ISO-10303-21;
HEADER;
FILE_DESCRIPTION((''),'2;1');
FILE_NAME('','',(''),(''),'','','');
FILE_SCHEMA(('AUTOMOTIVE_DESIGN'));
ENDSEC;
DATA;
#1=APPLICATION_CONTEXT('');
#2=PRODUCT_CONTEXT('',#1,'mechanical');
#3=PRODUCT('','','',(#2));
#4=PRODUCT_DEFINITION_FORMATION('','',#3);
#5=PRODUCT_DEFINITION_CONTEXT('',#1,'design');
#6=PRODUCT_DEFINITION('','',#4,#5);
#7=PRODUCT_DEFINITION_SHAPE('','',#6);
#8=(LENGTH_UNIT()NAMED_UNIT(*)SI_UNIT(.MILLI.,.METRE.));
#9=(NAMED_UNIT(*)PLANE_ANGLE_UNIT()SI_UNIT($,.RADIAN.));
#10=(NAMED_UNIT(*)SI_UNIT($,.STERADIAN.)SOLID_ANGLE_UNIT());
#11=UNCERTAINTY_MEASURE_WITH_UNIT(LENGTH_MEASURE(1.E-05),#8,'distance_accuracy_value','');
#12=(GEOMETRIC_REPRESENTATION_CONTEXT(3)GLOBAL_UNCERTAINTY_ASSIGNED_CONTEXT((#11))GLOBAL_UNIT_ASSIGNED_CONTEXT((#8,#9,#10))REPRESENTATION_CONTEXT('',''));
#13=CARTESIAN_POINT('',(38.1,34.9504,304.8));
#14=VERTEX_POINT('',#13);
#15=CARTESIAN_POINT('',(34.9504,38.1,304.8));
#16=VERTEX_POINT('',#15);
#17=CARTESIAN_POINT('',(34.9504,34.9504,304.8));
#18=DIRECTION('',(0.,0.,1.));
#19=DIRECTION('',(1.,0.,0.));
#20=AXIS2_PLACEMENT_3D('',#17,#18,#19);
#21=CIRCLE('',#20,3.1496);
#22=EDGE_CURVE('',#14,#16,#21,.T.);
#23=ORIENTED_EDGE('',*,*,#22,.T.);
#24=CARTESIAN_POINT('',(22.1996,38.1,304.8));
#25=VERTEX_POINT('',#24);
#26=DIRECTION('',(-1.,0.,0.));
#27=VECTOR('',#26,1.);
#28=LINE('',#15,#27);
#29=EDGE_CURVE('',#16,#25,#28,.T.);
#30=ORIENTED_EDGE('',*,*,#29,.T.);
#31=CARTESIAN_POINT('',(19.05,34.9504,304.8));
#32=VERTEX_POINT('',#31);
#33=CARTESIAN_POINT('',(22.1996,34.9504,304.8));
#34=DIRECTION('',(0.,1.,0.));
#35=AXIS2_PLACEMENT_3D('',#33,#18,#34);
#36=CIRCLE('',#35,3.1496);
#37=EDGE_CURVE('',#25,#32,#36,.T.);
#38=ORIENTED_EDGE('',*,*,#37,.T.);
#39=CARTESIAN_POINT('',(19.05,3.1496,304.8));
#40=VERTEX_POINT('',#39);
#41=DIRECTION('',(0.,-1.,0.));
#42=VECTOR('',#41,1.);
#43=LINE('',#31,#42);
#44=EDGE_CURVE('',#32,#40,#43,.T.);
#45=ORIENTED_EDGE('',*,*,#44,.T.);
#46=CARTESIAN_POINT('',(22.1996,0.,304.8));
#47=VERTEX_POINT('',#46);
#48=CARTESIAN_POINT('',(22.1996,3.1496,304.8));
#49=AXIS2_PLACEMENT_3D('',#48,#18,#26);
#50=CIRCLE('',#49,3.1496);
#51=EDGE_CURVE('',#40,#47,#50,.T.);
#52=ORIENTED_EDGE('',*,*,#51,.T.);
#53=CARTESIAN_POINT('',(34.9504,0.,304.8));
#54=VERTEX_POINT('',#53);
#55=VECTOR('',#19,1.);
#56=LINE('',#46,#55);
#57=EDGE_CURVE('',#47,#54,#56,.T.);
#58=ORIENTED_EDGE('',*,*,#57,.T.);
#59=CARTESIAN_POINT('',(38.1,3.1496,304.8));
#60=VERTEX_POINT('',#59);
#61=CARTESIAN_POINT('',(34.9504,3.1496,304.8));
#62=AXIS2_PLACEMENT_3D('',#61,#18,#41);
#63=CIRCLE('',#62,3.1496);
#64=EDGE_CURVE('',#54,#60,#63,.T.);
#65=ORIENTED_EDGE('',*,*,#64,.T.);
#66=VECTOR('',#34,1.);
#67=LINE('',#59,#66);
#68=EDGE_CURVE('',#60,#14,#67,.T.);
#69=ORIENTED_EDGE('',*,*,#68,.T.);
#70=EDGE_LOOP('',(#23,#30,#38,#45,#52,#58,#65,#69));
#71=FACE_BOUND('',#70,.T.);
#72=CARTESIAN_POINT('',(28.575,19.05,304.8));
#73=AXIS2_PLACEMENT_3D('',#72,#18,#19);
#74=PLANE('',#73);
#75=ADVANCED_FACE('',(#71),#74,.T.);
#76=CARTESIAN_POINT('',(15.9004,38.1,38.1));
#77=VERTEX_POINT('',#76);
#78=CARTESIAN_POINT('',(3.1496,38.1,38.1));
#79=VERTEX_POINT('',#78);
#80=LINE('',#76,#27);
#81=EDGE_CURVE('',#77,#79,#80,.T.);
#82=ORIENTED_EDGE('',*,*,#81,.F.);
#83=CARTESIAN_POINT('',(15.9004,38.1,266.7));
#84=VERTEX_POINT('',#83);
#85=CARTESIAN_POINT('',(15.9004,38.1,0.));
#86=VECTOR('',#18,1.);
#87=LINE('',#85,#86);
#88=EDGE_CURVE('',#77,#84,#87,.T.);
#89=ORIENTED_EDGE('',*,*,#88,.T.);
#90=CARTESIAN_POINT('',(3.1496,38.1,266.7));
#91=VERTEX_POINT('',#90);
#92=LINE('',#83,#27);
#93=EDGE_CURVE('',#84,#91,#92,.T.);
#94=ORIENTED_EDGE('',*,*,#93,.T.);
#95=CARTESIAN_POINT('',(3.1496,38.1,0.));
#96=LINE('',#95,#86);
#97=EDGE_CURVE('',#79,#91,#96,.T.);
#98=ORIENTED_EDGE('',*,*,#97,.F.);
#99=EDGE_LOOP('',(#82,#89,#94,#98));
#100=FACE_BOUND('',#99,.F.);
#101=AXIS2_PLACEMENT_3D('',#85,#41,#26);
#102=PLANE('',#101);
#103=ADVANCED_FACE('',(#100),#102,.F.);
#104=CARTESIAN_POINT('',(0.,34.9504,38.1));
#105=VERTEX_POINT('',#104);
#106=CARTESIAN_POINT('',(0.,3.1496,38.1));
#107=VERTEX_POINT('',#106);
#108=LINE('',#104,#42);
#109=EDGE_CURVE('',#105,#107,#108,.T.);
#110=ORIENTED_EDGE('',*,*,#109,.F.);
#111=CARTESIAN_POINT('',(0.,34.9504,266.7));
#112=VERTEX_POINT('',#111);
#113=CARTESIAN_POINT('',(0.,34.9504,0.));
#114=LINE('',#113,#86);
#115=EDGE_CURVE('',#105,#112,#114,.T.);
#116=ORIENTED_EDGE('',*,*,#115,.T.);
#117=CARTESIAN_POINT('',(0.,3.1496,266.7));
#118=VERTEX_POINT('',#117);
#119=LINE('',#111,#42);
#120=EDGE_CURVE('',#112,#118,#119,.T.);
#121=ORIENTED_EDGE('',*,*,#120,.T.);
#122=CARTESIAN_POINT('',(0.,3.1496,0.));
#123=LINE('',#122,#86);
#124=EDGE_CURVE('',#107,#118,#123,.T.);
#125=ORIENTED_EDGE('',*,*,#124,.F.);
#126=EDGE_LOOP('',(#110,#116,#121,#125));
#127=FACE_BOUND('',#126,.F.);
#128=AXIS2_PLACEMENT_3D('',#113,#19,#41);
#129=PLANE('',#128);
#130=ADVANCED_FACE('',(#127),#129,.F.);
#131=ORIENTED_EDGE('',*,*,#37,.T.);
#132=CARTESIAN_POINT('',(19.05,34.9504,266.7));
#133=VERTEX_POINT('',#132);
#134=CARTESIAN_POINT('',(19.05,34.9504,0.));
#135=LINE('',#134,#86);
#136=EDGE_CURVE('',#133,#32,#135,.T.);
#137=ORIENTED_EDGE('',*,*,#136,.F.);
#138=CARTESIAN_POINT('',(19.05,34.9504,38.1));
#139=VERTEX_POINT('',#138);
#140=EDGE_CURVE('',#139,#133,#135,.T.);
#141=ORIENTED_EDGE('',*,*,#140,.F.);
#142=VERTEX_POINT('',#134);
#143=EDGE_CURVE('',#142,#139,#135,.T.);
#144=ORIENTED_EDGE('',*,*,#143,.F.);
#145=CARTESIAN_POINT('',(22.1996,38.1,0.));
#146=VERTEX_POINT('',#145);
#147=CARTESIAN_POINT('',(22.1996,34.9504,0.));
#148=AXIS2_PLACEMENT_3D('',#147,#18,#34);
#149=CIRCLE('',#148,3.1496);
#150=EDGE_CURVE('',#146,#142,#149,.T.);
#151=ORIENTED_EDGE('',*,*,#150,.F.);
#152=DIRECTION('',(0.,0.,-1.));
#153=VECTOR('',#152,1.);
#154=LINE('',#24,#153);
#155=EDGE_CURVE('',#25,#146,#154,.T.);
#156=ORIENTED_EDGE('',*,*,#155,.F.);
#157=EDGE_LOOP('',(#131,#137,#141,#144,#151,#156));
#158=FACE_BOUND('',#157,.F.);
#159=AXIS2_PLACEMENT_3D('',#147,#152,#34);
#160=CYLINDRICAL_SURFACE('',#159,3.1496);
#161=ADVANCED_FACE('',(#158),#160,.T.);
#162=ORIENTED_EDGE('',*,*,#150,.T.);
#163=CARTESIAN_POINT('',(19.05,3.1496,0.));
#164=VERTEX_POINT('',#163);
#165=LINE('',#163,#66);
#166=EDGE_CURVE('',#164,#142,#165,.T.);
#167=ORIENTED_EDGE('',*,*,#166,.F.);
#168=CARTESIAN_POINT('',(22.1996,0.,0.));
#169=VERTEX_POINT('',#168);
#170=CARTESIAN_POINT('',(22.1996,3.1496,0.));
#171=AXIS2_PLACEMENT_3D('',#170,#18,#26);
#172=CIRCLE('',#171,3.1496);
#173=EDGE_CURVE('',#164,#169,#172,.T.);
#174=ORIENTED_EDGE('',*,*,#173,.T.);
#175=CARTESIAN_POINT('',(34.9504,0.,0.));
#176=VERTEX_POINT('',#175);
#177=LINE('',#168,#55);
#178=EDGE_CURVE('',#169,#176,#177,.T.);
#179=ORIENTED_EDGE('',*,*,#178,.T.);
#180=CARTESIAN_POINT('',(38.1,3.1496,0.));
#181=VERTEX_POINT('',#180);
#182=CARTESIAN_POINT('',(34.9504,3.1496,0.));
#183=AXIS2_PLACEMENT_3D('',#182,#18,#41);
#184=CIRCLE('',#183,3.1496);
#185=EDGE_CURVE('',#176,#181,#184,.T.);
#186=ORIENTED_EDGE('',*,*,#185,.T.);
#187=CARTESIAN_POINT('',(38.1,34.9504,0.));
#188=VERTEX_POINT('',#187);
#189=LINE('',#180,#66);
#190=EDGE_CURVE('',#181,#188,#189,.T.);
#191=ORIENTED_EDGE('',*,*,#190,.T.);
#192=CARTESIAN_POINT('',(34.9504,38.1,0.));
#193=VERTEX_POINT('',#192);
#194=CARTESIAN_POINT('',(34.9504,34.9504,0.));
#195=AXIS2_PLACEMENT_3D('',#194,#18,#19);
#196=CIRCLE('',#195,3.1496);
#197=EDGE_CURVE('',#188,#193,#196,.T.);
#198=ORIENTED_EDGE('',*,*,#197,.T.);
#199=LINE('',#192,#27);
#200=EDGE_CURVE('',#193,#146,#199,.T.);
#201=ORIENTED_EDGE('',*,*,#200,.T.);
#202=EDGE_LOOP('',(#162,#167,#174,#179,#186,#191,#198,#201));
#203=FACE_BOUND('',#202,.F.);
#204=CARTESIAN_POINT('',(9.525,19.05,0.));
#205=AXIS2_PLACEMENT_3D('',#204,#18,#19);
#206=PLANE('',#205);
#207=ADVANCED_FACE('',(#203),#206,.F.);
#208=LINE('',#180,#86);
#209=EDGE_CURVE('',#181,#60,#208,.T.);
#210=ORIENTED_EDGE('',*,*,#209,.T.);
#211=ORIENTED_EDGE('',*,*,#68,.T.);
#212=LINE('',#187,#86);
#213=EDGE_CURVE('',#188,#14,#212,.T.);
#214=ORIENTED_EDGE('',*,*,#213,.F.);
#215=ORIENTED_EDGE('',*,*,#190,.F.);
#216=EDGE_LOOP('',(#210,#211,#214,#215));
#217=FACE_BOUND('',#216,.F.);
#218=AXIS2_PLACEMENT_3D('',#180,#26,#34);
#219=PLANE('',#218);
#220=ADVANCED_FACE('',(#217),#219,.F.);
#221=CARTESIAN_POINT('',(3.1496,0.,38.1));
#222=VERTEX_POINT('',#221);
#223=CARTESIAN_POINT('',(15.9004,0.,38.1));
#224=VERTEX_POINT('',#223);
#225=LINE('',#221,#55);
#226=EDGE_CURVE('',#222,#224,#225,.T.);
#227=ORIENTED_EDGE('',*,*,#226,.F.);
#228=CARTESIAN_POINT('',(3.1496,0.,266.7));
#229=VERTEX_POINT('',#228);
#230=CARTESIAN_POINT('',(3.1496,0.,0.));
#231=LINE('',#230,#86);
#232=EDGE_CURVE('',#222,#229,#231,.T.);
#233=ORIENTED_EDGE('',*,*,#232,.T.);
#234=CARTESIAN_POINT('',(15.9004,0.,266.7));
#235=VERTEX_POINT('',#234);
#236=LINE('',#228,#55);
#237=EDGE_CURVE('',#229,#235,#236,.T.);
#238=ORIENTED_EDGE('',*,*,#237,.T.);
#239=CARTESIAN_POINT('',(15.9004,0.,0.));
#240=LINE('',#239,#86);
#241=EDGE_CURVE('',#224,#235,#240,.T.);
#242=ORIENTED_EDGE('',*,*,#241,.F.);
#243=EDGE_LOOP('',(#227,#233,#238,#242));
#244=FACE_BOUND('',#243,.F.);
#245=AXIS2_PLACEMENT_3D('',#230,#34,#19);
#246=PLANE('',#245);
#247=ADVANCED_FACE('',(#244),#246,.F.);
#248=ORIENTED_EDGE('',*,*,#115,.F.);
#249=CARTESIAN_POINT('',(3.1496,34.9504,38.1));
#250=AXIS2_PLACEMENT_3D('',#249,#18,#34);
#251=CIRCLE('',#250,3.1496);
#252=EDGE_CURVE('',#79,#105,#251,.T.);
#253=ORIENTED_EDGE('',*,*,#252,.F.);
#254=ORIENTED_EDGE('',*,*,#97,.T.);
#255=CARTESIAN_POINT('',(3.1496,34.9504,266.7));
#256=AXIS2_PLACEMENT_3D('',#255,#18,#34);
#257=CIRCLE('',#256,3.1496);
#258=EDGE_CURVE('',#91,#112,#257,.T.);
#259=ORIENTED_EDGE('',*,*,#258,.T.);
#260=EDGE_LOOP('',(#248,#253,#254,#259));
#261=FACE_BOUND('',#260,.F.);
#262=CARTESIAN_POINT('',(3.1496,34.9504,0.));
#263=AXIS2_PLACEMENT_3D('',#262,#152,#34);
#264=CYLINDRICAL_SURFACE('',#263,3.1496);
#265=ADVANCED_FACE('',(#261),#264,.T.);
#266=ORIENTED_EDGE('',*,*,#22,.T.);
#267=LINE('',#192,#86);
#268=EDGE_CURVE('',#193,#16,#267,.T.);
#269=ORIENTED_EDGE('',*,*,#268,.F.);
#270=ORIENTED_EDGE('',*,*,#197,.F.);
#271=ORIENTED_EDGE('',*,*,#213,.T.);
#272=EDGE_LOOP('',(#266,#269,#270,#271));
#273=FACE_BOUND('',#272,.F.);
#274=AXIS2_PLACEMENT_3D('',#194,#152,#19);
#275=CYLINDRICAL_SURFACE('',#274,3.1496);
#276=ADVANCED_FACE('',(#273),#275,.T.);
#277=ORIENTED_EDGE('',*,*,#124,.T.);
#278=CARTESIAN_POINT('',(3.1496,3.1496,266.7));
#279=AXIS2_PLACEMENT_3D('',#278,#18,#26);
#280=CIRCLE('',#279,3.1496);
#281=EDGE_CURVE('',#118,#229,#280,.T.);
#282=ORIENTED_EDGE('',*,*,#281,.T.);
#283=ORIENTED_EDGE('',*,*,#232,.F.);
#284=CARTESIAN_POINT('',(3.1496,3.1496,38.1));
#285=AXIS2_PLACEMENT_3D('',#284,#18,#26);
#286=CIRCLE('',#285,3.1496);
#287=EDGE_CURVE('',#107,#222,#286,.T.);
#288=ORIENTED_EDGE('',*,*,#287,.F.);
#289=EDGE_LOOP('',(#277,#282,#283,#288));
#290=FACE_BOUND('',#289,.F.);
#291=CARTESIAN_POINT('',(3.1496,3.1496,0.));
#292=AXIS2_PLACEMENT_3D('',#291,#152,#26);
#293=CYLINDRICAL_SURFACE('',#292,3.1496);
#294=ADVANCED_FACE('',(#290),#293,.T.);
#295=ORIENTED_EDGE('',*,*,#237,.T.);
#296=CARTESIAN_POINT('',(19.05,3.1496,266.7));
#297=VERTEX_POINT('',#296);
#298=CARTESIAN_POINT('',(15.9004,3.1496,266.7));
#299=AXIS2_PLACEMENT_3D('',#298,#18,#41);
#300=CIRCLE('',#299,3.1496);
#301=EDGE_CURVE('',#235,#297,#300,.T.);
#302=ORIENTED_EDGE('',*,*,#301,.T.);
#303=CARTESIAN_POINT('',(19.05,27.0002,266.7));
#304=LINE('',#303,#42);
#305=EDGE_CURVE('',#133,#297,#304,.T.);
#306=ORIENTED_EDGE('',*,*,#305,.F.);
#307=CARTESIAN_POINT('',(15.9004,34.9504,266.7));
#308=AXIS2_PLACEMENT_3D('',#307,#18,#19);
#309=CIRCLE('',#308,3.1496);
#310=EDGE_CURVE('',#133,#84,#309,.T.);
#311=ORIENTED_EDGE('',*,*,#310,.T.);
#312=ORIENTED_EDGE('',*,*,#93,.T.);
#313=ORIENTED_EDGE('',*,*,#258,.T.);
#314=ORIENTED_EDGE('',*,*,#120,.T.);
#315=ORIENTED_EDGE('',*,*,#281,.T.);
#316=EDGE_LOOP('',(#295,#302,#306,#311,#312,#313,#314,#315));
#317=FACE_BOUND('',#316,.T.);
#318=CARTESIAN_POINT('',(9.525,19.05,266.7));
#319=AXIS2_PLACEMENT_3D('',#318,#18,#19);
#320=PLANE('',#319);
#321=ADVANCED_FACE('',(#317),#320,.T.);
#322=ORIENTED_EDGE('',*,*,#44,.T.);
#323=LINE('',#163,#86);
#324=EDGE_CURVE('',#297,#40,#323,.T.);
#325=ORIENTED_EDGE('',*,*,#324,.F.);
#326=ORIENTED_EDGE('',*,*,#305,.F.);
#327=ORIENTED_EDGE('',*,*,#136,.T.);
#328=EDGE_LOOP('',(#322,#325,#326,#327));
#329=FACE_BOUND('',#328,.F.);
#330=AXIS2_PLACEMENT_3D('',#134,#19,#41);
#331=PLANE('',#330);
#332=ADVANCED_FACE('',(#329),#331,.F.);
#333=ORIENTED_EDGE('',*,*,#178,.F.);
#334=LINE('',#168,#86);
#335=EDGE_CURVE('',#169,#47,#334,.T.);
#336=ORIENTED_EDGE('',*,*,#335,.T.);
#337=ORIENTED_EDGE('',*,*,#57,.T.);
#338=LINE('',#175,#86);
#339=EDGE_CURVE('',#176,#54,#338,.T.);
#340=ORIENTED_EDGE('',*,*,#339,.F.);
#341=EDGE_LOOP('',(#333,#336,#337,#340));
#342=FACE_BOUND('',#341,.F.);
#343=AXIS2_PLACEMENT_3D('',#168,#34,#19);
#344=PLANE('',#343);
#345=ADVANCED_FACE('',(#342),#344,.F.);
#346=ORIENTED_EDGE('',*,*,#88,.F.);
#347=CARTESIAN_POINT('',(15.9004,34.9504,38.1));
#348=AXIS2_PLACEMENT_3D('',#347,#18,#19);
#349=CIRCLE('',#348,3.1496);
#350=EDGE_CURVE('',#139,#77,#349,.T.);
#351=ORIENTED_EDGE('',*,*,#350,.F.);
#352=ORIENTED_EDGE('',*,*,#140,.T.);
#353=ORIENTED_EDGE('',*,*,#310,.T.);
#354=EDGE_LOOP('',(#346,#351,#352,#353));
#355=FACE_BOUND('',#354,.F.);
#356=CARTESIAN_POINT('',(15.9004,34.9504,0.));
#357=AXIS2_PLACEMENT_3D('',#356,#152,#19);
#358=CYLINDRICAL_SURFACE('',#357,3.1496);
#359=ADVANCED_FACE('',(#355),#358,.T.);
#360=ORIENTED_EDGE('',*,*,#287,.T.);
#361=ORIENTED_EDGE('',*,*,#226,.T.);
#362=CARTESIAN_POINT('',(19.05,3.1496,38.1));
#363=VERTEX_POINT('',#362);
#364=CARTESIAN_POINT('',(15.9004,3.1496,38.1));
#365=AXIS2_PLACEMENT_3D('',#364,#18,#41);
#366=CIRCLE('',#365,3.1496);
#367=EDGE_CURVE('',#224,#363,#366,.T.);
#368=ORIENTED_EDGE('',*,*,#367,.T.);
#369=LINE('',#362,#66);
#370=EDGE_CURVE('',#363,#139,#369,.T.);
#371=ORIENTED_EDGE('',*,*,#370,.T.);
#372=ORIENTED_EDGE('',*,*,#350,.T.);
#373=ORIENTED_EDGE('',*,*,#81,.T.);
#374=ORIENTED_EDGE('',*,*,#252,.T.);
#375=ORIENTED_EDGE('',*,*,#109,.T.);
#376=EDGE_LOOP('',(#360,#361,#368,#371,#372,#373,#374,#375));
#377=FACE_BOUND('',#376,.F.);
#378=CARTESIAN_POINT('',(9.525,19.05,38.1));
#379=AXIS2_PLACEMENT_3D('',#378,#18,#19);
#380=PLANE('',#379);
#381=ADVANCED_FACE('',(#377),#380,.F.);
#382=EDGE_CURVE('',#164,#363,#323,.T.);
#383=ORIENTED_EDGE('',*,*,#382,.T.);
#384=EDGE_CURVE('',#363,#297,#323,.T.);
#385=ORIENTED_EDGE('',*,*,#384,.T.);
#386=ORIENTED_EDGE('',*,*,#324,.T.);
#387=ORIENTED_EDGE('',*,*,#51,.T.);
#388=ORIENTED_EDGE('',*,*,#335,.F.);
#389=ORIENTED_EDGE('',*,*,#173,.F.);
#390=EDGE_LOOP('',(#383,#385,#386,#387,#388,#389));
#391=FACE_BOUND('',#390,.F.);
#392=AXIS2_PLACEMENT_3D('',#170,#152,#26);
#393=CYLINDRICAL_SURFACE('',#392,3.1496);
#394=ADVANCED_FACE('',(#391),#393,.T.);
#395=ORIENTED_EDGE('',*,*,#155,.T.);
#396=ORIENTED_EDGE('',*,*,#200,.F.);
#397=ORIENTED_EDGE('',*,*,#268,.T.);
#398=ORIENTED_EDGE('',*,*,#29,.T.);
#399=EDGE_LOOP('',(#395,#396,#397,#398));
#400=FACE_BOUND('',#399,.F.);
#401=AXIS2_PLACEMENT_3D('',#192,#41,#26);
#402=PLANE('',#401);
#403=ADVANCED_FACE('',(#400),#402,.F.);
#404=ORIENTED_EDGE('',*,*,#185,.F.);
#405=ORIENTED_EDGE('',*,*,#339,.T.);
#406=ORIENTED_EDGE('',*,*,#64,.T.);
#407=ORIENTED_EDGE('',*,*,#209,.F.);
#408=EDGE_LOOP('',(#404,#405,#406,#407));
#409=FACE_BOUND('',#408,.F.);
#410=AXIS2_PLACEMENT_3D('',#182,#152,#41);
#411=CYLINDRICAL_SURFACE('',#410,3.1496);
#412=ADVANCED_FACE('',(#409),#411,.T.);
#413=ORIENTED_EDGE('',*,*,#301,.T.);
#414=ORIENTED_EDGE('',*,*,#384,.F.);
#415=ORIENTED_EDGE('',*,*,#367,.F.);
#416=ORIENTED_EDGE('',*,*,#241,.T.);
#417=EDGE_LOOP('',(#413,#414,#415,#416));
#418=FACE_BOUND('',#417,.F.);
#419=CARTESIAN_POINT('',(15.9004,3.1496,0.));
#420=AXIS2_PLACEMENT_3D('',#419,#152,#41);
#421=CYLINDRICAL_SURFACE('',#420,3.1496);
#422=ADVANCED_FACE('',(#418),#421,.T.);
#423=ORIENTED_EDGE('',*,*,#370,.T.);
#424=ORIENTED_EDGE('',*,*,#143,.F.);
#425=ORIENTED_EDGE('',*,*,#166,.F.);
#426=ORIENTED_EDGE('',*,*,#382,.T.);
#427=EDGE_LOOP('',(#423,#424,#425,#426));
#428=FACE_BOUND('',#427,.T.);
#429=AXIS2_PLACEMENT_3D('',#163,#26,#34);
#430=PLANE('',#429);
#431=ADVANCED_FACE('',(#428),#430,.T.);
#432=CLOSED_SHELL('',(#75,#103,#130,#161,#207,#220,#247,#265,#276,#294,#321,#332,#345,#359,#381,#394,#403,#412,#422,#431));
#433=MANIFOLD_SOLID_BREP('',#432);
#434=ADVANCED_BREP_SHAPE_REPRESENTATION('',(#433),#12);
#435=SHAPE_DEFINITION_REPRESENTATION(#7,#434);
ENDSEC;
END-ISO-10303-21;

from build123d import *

# Parameters (mm, degrees)
F1_DEPTH = 304.8
F2_DEPTH = 266.7
F3_DEPTH = 38.1


# Not quite as in the source:
# - a feature names something its author has since deleted; it is built from what else it names


with BuildPart() as f1:
    # F0 (on Top) → F1 (new body)
    with BuildSketch(Plane.XY):
        with BuildLine():
            Line((19.05, 34.9504), (19.05, 3.1496))
            ThreePointArc((19.05, 3.1496), (19.972496482, 0.922496482), (22.1996, 0))
            Line((22.1996, 0), (34.9504, 0))
            ThreePointArc((34.9504, 0), (37.177503518, 0.922496482), (38.1, 3.1496))
            Line((38.1, 3.1496), (38.1, 34.9504))
            ThreePointArc((38.1, 34.9504), (37.177503518, 37.177503518), (34.9504, 38.1))
            Line((34.9504, 38.1), (22.1996, 38.1))
            ThreePointArc((22.1996, 38.1), (19.972496482, 37.177503518), (19.05, 34.9504))
        make_face()
    extrude(amount=F1_DEPTH)

    # F0 (on Top) → F2 (join)
    with BuildSketch(Plane.XY):
        with BuildLine():
            ThreePointArc((0, 3.1496), (0.922496482, 0.922496482), (3.1496, 0))
            Line((3.1496, 0), (15.9004, 0))
            ThreePointArc((15.9004, 0), (18.127503518, 0.922496482), (19.05, 3.1496))
            Line((19.05, 3.1496), (19.05, 34.9504))
            ThreePointArc((19.05, 34.9504), (18.127503518, 37.177503518), (15.9004, 38.1))
            Line((15.9004, 38.1), (3.1496, 38.1))
            ThreePointArc((3.1496, 38.1), (0.922496482, 37.177503518), (0, 34.9504))
            Line((0, 34.9504), (0, 3.1496))
        make_face()
        with BuildLine():
            Line((19.05, 34.9504), (19.05, 3.1496))
            ThreePointArc((19.05, 3.1496), (19.972496482, 0.922496482), (22.1996, 0))
            Line((22.1996, 0), (34.9504, 0))
            ThreePointArc((34.9504, 0), (37.177503518, 0.922496482), (38.1, 3.1496))
            Line((38.1, 3.1496), (38.1, 34.9504))
            ThreePointArc((38.1, 34.9504), (37.177503518, 37.177503518), (34.9504, 38.1))
            Line((34.9504, 38.1), (22.1996, 38.1))
            ThreePointArc((22.1996, 38.1), (19.972496482, 37.177503518), (19.05, 34.9504))
        make_face()
    extrude(amount=F2_DEPTH)

    # F0 (on Top) → F3 (cut)
    with BuildSketch(Plane.XY):
        with BuildLine():
            ThreePointArc((0, 3.1496), (0.922496482, 0.922496482), (3.1496, 0))
            Line((3.1496, 0), (15.9004, 0))
            ThreePointArc((15.9004, 0), (18.127503518, 0.922496482), (19.05, 3.1496))
            Line((19.05, 3.1496), (19.05, 34.9504))
            ThreePointArc((19.05, 34.9504), (18.127503518, 37.177503518), (15.9004, 38.1))
            Line((15.9004, 38.1), (3.1496, 38.1))
            ThreePointArc((3.1496, 38.1), (0.922496482, 37.177503518), (0, 34.9504))
            Line((0, 34.9504), (0, 3.1496))
        make_face()
    extrude(amount=F3_DEPTH, mode=Mode.SUBTRACT)


solid = f1.part
